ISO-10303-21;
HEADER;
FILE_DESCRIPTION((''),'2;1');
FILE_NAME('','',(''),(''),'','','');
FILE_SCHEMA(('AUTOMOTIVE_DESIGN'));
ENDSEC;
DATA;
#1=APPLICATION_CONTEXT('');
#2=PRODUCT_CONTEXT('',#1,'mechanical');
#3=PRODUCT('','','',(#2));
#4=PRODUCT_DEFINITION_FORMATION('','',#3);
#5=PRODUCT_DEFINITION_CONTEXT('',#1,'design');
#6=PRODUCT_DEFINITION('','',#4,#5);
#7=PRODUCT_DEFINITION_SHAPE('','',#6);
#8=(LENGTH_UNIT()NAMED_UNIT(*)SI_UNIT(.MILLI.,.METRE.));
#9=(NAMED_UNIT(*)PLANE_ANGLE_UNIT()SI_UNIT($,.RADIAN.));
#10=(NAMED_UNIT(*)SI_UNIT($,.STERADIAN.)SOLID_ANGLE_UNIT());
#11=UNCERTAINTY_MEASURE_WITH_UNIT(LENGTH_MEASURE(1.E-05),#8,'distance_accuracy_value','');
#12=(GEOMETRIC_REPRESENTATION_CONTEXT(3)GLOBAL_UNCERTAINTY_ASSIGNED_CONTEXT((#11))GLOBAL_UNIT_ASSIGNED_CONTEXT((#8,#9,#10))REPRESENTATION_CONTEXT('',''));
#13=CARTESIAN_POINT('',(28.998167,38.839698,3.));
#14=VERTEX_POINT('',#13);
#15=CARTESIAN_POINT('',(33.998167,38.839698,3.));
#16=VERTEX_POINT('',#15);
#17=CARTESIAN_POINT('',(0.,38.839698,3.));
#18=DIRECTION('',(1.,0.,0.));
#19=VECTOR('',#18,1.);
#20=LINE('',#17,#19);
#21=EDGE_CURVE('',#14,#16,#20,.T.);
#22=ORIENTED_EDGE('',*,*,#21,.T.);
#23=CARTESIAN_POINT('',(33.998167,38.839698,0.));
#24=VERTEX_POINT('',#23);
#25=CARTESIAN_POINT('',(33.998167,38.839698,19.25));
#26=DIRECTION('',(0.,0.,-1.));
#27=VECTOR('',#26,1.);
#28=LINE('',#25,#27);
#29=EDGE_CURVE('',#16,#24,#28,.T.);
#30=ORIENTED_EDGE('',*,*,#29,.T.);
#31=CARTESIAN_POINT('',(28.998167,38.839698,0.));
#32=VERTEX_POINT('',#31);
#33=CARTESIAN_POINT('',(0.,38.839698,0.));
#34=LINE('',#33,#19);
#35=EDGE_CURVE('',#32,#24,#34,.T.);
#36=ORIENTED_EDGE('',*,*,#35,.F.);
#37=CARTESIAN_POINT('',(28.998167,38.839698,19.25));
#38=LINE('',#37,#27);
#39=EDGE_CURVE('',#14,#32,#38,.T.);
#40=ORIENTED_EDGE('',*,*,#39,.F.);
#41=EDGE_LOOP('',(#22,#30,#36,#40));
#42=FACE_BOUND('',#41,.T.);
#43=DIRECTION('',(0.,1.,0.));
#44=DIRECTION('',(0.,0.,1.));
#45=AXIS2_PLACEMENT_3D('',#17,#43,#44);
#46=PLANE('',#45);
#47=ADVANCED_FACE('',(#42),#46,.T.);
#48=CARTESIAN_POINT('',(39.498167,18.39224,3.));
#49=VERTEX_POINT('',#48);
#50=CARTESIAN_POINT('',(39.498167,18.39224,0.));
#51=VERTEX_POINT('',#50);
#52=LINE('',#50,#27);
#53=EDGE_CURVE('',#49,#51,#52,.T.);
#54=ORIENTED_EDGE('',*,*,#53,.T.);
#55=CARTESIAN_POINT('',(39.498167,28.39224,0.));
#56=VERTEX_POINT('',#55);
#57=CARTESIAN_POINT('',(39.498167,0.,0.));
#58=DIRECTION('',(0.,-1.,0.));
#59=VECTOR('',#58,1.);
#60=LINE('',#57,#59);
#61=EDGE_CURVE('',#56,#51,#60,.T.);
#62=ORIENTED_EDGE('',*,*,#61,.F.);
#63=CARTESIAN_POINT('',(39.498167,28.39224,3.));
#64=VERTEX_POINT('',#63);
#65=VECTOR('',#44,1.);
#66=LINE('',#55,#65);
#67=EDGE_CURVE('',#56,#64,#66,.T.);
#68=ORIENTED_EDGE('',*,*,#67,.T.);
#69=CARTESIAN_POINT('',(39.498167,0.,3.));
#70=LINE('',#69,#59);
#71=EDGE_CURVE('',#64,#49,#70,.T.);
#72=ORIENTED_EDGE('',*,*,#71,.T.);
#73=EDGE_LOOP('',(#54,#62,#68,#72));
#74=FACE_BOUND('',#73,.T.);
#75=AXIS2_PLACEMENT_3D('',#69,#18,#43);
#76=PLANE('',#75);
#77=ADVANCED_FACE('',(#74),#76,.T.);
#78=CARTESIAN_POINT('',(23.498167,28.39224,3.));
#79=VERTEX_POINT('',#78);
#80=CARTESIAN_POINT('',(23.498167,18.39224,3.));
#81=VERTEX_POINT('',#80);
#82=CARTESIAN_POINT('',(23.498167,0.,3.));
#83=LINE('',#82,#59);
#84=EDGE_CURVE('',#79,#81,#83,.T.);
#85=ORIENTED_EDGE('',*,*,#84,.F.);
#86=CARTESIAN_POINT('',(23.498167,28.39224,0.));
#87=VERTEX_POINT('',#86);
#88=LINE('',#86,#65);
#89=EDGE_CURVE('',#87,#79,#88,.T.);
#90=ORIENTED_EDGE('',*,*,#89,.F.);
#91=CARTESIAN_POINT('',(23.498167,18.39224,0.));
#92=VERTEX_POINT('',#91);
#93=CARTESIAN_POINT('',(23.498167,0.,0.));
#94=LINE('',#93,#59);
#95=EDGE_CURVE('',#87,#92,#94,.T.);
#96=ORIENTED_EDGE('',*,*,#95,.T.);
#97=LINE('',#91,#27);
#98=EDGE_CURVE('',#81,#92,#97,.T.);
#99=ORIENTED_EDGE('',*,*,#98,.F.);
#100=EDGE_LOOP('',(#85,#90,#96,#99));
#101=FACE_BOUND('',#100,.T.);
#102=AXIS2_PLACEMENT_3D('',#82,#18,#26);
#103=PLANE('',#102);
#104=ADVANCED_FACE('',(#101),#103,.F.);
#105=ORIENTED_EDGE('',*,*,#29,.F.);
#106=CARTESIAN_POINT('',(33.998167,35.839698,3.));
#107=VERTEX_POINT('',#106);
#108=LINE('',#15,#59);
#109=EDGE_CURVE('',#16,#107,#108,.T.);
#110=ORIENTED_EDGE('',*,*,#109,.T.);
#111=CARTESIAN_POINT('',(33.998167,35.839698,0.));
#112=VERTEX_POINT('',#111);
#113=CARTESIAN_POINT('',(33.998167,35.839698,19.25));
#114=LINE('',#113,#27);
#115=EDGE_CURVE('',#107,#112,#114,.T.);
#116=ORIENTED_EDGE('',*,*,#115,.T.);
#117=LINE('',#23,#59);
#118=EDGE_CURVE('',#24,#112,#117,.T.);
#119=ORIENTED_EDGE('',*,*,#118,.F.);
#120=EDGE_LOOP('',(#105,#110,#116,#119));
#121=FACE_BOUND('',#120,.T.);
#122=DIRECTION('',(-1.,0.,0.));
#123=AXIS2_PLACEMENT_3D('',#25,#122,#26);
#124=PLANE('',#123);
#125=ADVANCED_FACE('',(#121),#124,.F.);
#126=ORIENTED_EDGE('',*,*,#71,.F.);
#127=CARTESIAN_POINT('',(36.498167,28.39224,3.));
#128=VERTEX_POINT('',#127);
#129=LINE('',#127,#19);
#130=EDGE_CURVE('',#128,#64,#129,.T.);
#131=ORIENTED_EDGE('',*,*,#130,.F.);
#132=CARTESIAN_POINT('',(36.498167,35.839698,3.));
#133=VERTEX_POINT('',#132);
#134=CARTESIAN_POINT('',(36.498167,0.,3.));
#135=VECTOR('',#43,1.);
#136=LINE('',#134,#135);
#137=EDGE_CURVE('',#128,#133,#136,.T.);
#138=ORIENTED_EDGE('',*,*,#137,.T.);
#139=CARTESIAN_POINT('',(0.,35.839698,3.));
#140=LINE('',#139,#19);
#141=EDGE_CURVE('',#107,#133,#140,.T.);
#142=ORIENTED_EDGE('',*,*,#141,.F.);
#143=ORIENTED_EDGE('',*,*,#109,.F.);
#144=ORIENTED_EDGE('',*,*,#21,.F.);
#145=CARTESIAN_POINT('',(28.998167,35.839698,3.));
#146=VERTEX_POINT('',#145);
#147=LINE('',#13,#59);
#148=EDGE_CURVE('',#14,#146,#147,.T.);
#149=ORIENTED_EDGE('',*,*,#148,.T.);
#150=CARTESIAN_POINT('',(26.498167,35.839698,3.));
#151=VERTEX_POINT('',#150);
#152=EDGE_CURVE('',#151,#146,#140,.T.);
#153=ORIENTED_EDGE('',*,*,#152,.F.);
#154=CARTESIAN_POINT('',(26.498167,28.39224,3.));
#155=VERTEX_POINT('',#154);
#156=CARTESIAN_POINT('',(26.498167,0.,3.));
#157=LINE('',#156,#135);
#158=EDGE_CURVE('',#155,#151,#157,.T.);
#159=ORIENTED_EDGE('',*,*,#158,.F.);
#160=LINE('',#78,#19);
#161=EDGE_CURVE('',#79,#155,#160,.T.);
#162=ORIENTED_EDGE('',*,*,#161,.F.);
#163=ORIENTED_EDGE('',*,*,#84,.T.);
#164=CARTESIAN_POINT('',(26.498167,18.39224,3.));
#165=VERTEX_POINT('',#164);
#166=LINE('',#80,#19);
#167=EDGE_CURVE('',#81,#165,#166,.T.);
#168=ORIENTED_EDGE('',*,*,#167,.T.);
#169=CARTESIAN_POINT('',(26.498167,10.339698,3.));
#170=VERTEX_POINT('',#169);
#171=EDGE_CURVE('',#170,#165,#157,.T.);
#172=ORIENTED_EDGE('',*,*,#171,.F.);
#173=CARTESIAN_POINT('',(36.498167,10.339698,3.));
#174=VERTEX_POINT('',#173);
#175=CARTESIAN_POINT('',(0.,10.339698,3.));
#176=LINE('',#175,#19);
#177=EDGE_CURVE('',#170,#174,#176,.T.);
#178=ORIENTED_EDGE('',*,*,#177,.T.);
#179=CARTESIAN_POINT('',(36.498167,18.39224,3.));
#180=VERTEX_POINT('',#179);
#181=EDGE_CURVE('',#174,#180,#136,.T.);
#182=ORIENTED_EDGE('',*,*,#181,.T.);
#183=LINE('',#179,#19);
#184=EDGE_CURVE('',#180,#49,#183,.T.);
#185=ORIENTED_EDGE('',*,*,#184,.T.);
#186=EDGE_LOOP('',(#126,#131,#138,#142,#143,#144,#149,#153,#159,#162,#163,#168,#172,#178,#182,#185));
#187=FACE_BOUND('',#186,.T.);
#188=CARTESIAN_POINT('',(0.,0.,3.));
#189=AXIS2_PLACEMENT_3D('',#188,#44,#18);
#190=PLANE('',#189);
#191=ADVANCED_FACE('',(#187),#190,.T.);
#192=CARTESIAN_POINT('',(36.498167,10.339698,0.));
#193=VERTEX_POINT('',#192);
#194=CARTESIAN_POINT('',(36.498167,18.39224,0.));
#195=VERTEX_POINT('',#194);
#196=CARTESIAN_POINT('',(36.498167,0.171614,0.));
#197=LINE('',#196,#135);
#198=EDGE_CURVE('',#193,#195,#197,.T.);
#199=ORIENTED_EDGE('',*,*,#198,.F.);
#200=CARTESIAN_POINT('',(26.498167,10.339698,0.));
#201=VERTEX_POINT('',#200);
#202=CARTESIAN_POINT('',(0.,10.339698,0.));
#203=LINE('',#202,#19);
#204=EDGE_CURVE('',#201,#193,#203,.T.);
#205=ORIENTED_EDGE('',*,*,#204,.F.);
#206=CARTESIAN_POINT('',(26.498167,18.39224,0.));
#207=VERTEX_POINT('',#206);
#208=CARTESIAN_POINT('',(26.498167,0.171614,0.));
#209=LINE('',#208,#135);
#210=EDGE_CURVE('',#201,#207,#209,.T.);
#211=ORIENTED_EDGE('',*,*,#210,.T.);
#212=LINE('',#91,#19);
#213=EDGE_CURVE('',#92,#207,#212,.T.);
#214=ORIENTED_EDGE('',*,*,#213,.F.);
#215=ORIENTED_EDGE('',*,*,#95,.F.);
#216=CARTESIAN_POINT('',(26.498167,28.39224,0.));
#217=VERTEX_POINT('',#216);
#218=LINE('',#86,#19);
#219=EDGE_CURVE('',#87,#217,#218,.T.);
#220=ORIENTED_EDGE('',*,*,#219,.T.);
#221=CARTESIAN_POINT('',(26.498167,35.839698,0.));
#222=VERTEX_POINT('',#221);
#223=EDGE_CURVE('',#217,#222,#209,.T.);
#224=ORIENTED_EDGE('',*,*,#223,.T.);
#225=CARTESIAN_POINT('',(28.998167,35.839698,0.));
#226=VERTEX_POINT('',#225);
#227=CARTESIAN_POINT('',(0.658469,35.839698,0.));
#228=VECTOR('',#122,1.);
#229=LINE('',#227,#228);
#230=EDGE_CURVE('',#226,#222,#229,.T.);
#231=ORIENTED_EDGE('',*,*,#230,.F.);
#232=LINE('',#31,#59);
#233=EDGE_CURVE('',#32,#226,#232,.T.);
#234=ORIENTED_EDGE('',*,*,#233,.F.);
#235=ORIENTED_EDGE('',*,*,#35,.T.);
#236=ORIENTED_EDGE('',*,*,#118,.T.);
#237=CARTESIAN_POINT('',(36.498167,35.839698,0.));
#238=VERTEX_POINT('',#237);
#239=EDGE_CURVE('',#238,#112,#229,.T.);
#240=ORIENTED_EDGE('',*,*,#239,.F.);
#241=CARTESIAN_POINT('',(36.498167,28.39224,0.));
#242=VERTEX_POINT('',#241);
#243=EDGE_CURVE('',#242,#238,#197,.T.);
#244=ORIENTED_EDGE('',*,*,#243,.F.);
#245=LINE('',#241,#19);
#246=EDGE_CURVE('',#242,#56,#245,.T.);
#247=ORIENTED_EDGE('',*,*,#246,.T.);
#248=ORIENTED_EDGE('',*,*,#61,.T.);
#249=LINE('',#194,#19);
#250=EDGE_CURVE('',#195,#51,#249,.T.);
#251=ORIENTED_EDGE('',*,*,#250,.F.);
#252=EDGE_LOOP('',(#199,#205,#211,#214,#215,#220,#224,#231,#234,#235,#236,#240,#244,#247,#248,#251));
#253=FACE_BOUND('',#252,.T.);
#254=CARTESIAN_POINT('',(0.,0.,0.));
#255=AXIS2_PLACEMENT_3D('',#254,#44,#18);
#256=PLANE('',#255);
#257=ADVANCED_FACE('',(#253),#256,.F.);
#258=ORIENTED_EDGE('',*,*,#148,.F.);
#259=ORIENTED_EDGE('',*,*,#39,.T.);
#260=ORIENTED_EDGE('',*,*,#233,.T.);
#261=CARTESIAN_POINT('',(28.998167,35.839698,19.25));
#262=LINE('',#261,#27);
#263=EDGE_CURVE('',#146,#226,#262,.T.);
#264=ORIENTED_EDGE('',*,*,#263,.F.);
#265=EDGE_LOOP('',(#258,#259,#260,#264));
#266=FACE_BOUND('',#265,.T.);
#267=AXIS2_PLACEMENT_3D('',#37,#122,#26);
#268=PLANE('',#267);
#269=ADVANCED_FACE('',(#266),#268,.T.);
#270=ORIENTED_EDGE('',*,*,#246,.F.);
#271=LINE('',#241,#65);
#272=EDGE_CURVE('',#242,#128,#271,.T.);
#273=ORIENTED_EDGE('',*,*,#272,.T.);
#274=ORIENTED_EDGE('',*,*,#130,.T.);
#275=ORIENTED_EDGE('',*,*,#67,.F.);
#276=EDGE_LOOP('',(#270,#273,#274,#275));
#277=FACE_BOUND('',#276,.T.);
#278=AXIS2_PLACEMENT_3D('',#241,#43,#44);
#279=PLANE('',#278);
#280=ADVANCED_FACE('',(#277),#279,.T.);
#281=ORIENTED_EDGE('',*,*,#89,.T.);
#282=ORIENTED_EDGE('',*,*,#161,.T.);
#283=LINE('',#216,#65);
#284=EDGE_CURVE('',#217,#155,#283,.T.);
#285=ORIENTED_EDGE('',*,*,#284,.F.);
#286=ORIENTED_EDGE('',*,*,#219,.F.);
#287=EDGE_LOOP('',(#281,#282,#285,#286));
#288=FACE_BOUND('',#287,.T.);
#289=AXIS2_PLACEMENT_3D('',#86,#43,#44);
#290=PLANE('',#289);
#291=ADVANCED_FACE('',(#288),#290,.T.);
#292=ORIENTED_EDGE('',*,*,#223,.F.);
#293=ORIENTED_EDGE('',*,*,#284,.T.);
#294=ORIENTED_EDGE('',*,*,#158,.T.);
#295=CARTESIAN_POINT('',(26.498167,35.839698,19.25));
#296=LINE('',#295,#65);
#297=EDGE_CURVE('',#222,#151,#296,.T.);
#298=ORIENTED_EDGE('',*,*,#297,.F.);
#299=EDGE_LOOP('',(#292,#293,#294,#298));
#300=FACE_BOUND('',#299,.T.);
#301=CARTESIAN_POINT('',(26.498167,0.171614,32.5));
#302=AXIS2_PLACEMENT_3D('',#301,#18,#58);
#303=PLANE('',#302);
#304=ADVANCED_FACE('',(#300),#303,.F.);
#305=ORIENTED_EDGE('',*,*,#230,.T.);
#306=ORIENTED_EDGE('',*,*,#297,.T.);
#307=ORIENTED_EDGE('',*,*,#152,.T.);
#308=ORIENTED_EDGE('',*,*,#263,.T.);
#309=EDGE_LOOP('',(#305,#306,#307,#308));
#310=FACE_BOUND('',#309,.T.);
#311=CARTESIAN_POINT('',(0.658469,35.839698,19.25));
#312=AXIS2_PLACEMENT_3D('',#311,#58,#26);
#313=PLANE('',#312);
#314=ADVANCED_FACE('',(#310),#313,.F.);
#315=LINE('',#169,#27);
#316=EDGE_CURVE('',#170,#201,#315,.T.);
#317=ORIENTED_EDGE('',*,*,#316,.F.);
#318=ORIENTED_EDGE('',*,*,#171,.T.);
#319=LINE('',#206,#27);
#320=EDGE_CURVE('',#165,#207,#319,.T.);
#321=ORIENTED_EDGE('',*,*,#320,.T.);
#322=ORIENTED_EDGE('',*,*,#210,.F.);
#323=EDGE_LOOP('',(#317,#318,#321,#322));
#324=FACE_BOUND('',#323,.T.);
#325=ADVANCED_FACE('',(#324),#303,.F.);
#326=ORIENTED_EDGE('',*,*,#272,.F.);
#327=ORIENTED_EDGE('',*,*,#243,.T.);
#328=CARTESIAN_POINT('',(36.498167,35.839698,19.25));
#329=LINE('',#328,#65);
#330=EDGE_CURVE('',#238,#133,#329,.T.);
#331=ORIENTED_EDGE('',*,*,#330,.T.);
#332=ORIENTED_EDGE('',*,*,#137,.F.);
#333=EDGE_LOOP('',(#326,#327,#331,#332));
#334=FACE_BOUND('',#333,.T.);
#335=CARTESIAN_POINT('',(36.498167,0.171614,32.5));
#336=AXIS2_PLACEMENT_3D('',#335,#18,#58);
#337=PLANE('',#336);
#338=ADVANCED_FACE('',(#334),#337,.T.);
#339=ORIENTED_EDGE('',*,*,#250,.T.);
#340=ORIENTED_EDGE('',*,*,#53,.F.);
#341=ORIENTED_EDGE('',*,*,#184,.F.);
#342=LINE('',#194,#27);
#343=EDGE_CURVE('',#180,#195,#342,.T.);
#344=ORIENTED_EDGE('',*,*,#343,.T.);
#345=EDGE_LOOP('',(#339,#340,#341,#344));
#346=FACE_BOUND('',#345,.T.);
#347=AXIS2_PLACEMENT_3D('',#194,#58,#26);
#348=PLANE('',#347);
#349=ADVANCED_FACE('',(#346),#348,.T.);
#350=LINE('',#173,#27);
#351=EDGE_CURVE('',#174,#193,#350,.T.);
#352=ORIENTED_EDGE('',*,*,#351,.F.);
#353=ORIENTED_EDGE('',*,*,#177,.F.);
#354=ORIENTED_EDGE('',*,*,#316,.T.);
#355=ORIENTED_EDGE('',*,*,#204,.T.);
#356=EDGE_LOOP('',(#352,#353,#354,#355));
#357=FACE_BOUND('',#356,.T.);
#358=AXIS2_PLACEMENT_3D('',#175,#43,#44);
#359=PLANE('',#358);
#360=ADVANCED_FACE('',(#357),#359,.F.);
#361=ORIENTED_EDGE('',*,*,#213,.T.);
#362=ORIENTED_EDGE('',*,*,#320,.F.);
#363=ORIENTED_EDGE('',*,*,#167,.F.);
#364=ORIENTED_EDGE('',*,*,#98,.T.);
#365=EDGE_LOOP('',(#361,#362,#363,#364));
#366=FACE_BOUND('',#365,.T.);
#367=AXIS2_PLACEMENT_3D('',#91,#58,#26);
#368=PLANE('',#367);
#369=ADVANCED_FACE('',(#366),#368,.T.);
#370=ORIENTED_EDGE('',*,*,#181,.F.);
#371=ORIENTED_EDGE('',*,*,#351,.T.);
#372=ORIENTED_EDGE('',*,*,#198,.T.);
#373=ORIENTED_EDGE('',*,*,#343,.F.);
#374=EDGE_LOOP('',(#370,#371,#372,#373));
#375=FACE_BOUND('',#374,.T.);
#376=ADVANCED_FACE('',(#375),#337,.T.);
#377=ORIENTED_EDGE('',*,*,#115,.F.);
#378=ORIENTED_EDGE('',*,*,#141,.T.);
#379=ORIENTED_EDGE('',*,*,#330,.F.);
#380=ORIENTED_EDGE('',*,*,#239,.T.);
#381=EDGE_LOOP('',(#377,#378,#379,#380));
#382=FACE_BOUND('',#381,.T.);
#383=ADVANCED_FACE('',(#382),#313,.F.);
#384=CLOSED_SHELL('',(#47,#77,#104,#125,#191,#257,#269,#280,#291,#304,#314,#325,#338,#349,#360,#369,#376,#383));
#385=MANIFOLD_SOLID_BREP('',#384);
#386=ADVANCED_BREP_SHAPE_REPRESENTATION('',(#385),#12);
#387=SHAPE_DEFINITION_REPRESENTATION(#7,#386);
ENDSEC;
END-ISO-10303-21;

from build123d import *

# Parameters (mm, degrees)
SKETCH1_W             = 16
SKETCH1_H             = 28.5
BOSS_EXTRUDE1_DEPTH   = 3
CAVITY1_START         = 23.498167492
CAVITY1_OUTLINE_W     = 10.447458445
CAVITY1_OUTLINE_H     = 3
CAVITY1_OUTLINE_W_2   = 8.052541555
CAVITY1_DEPTH         = 3
CAVITY1_START_2       = 36.498167492
CAVITY1_2_OUTLINE_W   = 10.447458445
CAVITY1_2_OUTLINE_H   = 3
CAVITY1_2_OUTLINE_W_2 = 8.052541555
CAVITY1_2_DEPTH       = 3
CAVITY1_START_3       = 26.498167492
CAVITY1_3_OUTLINE_W   = 3
CAVITY1_3_OUTLINE_H   = 3
CAVITY1_3_DEPTH       = 2.5
CAVITY1_START_4       = 33.998167492
CAVITY1_4_OUTLINE_W   = 3
CAVITY1_4_OUTLINE_H   = 3
CAVITY1_4_DEPTH       = 2.5


# Read off the part's stored shape, not the designer's step: Cavity1
with BuildPart() as part:
    # Sketch1 → Boss-Extrude1 (new body)
    with BuildSketch(Plane.XY):
        with Locations((31.498167492, 24.589698152)):
            Rectangle(SKETCH1_W, SKETCH1_H)
    extrude(amount=BOSS_EXTRUDE1_DEPTH)

    # Cavity1 outline → Cavity1 (cut)
    with BuildSketch(Plane.YZ.offset(CAVITY1_START)):
        with Locations((33.615968929, 1.5)):
            Rectangle(CAVITY1_OUTLINE_W, CAVITY1_OUTLINE_H)
        with Locations((14.36596893, 1.5)):
            Rectangle(CAVITY1_OUTLINE_W_2, CAVITY1_OUTLINE_H)
    extrude(amount=CAVITY1_DEPTH, mode=Mode.SUBTRACT)

    # Cavity1 2 outline → Cavity1 2 (cut)
    with BuildSketch(Plane.YZ.offset(CAVITY1_START_2)):
        with Locations((33.615968929, 1.5)):
            Rectangle(CAVITY1_2_OUTLINE_W, CAVITY1_2_OUTLINE_H)
        with Locations((14.36596893, 1.5)):
            Rectangle(CAVITY1_2_OUTLINE_W_2, CAVITY1_2_OUTLINE_H)
    extrude(amount=CAVITY1_2_DEPTH, mode=Mode.SUBTRACT)

    # Cavity1 3 outline → Cavity1 3 (cut)
    with BuildSketch(Plane.YZ.offset(CAVITY1_START_3)):
        with Locations((37.339698152, 1.5)):
            Rectangle(CAVITY1_3_OUTLINE_W, CAVITY1_3_OUTLINE_H)
    extrude(amount=CAVITY1_3_DEPTH, mode=Mode.SUBTRACT)

    # Cavity1 4 outline → Cavity1 4 (cut)
    with BuildSketch(Plane.YZ.offset(CAVITY1_START_4)):
        with Locations((37.339698152, 1.5)):
            Rectangle(CAVITY1_4_OUTLINE_W, CAVITY1_4_OUTLINE_H)
    extrude(amount=CAVITY1_4_DEPTH, mode=Mode.SUBTRACT)


solid = part.part
